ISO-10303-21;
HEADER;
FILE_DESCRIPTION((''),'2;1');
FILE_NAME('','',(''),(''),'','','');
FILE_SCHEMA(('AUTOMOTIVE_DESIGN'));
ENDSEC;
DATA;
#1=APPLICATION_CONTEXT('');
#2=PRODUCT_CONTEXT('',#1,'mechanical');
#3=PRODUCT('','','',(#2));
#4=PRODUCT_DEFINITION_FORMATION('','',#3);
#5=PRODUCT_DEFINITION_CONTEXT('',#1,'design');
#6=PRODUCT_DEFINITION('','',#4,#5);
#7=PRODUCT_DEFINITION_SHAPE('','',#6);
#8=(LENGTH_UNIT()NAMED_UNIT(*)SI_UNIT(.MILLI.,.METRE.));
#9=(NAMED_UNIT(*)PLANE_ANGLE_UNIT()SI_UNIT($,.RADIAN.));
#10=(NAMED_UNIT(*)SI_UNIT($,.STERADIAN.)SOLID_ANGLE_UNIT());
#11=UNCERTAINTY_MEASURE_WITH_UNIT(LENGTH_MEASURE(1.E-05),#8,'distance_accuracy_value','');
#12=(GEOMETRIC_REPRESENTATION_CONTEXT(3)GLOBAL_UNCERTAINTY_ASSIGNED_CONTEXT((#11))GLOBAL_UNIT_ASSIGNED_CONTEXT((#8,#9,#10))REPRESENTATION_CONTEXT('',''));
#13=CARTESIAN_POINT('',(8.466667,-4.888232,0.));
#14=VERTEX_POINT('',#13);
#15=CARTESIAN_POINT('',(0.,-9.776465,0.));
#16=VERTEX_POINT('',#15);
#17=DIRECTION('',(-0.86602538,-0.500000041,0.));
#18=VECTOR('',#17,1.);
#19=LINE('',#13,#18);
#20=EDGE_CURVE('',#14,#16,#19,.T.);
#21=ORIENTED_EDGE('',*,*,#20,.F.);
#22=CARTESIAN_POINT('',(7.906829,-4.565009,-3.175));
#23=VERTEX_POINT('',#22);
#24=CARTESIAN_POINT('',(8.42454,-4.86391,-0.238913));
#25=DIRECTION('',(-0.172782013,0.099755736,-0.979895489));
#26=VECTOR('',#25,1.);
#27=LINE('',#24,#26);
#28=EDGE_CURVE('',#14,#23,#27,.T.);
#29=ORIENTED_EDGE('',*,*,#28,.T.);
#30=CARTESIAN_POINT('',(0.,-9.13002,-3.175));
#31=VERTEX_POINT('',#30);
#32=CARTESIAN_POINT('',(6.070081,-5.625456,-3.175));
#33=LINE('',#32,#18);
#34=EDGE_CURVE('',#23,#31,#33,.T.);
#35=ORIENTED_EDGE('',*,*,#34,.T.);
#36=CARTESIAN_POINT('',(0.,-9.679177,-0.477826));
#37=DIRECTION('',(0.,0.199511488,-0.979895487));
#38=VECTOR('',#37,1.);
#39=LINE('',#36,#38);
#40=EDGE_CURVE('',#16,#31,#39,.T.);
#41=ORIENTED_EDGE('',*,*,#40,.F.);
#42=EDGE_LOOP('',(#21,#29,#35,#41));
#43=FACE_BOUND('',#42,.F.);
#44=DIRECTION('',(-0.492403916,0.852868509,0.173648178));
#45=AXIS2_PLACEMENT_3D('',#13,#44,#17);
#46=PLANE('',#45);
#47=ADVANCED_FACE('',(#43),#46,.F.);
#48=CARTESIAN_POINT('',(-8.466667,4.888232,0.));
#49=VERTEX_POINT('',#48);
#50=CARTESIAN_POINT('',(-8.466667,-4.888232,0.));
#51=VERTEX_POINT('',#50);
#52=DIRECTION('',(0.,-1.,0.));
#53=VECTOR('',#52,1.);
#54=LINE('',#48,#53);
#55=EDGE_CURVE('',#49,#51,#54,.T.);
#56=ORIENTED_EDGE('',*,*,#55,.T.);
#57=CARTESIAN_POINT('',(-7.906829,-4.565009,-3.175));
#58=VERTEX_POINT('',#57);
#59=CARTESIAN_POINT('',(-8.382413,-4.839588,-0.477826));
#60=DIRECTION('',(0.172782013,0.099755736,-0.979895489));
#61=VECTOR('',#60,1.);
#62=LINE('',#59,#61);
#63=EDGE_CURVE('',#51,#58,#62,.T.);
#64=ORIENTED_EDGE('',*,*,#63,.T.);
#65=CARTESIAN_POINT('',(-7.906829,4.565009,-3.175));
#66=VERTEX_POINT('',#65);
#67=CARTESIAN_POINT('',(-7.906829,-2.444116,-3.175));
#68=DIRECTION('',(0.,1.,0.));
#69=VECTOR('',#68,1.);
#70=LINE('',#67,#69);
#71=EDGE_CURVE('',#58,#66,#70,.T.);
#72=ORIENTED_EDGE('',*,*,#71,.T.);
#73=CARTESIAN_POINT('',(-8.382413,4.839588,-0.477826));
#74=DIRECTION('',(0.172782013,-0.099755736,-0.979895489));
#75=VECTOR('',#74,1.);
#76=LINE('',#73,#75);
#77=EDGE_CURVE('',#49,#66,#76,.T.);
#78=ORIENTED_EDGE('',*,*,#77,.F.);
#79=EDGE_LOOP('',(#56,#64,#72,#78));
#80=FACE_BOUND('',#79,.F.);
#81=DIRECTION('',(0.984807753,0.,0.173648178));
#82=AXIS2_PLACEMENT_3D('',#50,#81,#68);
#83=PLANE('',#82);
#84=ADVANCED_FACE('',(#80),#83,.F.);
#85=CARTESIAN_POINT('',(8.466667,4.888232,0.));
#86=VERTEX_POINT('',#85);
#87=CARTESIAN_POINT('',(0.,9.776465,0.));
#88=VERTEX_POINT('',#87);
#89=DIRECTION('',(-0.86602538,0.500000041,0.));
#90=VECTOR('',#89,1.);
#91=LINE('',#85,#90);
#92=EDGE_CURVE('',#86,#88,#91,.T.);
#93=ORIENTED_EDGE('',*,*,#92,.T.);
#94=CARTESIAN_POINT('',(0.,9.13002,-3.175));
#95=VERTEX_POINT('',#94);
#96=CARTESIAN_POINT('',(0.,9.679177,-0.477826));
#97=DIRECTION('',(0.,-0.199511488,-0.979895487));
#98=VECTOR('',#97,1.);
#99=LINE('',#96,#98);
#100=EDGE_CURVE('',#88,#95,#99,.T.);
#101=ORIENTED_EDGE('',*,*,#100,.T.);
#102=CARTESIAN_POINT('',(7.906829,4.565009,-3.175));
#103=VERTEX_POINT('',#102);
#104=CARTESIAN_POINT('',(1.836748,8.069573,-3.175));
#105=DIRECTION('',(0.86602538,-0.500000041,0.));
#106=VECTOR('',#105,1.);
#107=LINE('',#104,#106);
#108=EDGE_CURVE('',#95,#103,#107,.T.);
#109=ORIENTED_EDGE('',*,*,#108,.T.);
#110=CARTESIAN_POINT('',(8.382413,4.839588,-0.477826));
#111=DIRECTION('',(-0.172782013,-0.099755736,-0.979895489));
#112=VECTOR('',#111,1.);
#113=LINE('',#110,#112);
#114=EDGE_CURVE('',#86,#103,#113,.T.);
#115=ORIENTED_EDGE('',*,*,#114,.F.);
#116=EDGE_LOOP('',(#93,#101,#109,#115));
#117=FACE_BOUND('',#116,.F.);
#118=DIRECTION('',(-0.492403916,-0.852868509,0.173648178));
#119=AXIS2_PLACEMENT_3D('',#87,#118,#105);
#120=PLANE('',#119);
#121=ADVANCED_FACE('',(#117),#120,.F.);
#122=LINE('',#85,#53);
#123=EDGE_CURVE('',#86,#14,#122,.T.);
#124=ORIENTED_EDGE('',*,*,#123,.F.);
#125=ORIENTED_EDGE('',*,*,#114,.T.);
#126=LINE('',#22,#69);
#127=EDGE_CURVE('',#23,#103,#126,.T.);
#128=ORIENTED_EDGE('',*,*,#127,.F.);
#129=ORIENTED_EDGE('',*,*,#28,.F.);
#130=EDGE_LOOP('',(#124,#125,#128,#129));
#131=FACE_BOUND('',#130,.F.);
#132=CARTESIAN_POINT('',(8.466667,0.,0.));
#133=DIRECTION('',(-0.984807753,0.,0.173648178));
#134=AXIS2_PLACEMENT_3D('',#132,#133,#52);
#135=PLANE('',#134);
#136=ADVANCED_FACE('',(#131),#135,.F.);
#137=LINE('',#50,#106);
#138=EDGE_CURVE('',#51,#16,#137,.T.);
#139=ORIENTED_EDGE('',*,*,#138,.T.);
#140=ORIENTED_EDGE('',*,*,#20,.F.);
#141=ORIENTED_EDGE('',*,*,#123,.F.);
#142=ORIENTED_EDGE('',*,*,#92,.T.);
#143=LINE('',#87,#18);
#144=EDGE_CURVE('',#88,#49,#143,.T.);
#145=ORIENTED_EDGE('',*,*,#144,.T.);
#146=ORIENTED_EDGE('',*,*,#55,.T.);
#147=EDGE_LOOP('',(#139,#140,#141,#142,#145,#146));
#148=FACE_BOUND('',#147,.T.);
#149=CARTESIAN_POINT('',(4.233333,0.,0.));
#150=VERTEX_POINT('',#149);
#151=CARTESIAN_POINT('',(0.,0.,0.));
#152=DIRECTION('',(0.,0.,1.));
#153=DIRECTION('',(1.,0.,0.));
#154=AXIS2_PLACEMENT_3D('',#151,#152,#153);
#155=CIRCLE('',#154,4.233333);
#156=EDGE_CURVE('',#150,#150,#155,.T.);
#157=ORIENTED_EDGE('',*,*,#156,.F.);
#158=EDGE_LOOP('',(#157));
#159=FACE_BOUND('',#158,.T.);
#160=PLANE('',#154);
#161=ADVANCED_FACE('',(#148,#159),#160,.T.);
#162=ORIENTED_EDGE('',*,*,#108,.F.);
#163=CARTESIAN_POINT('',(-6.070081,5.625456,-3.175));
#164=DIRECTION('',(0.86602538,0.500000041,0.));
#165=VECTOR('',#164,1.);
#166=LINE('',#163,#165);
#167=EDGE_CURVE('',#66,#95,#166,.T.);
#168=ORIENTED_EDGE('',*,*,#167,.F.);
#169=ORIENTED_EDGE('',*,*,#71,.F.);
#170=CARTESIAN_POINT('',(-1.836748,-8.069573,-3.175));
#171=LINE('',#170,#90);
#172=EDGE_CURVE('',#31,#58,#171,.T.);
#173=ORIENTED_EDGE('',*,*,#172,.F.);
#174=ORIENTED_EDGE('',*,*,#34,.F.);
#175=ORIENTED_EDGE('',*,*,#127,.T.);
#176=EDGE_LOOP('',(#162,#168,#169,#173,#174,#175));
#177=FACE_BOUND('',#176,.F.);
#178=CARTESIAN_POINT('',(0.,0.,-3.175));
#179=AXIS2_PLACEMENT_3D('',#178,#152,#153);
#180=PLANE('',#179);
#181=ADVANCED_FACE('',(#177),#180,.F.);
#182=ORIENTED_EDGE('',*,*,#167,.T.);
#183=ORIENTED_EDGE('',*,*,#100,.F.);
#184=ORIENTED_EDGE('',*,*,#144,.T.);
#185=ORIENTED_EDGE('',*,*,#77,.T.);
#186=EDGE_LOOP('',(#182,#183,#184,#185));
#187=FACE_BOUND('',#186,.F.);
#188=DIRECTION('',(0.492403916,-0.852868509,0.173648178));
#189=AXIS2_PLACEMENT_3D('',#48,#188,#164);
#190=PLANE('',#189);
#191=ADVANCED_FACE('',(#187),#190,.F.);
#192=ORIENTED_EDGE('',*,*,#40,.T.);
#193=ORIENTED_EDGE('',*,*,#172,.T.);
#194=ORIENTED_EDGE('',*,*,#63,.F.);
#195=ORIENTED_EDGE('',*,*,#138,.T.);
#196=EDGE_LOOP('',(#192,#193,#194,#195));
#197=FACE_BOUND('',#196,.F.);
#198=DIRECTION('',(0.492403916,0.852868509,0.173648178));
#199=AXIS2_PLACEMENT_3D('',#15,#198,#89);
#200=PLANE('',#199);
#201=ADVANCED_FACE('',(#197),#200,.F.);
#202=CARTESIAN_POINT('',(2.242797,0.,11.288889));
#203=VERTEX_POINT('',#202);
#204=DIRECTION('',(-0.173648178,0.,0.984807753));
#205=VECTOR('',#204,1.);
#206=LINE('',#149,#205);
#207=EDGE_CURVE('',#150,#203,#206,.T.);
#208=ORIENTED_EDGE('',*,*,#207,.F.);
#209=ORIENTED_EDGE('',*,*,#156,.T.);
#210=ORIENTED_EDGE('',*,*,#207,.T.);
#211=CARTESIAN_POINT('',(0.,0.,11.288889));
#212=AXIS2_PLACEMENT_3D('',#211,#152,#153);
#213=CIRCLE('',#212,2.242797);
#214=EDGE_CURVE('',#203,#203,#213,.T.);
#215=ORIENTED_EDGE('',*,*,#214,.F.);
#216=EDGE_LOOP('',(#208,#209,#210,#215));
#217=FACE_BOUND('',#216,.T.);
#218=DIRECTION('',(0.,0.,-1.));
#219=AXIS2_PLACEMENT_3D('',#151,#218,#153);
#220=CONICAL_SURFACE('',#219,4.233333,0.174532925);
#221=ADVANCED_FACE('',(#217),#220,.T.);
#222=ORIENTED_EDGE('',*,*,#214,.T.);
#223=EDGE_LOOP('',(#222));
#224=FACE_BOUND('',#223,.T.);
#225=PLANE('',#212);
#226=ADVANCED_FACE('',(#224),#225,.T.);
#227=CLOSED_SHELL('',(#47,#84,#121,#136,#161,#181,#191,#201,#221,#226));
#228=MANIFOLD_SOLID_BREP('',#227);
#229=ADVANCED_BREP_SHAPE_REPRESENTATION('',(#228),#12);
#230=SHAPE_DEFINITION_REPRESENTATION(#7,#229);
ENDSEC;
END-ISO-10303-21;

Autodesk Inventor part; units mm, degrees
ref_plane "YZ Plane" through (0, 0, 0) normal (1, 0, 0) x (0, 1, 0)
ref_plane "XZ Plane" through (0, 0, 0) normal (0, 1, 0) x (-1, 0, 0)
ref_plane "XY Plane" through (0, 0, 0) normal (0, 0, 1) x (1, 0, 0)
sketch "Sketch1" plane through (0, 0, 0) normal (0, 0, 1) x (1, 0, 0)
  line L0 (5.644444, -5.644444) -> (-5.644444, -5.644444)
  line L1 (-5.644444, -5.644444) -> (-5.644444, 5.644444)
  line L2 (-5.644444, 5.644444) -> (5.644444, 5.644444)
  line L3 (5.644444, 5.644444) -> (5.644444, -5.644444)
  point P0 (0, 0)
  point P1 (0, 0)
  dimension "d0" = 11.28889
extrude "Extrusion1" add sketch "Sketch1" along normal blind 8.466667
ref_plane "Work Plane1" through (0, 5.644444, 8.466667) normal (-1, 0, 0) x (0, -1, 0)
sketch "Sketch2" plane through (0, 5.644444, 8.466667) normal (-1, 0, 0) x (0, -1, 0)
  line L0 (5.644444, -8.466667) -> (-2.822222, -8.466667)
  line L1 (0, -8.466667) -> (11.288889, -8.466667)
  line L2 (5.644444, -8.466667) -> (5.644444, -11.641667)
  arc A0 (-2.822222, -8.466667) -> (5.644444, -11.641667) centre (5.644444, 1.234722) ccw
  dimension "d3" = 8.46667
  dimension "d4" = 3.175
revolve "Revolution1" add sketch "Sketch2" angle 360 about axis through (0, 0, 0) along (0, 0, -1)
sketch "Sketch3" plane through (0, 0, 8.466667) normal (0, 0, 1) x (1, 0, 0)
  line L0 (-5.644444, -5.644444) -> (5.644444, -5.644444)
  line L1 (5.644444, -5.644444) -> (5.644444, 5.644444)
  line L2 (5.644444, 5.644444) -> (-5.644444, 5.644444)
  line L3 (-5.644444, 5.644444) -> (-5.644444, -5.644444)
  point P0 (0, 0)
extrude "Extrusion2" cut sketch "Sketch3" against normal up to surface (8.466667 mm away)
sketch "Sketch4" plane through (0, 0, 0) normal (0, 0, 1) x (1, 0, 0)
  circle A0 centre (0, 0) radius 4.233333
  dimension "d8" = 8.46667
extrude "Extrusion3" add sketch "Sketch4" along normal blind 11.288889 draft -10
sketch "Sketch5" plane through (0, 0, 0) normal (0, 0, 1) x (1, 0, 0)
  circle A0 centre (0, 0) radius 8.466667
  line L0 (8.466667, -4.888232) -> (0, -9.776465)
  line L1 (0, -9.776465) -> (-8.466667, -4.888232)
  line L2 (-8.466667, -4.888232) -> (-8.466667, 4.888232)
  line L3 (-8.466667, 4.888232) -> (0, 9.776465)
  line L4 (0, 9.776465) -> (8.466667, 4.888232)
  line L5 (8.466667, 4.888232) -> (8.466667, -4.888232)
  point P0 (0, 0)
  point P1 (0, 0)
  point P2 (8.466667, 0)
sketch "Sketch5 outline for Extrusion4" plane through (0, 0, 0) normal (0, 0, 1) x (1, 0, 0)
  line L0 (8.466667, 0) -> (8.466667, -4.888232)
  line L1 (8.466667, -4.888232) -> (0, -9.776465)
  line L2 (0, -9.776465) -> (-8.466667, -4.888232)
  line L3 (-8.466667, -4.888232) -> (-8.466667, 4.888232)
  line L4 (-8.466667, 4.888232) -> (0, 9.776465)
  line L5 (0, 9.776465) -> (8.466667, 4.888232)
  line L6 (8.466667, 4.888232) -> (8.466667, 0)
extrude "Extrusion4" add sketch "Sketch5 outline for Extrusion4" against normal blind 3.175 draft -10
properties part number "Driver Shaft Cap"
